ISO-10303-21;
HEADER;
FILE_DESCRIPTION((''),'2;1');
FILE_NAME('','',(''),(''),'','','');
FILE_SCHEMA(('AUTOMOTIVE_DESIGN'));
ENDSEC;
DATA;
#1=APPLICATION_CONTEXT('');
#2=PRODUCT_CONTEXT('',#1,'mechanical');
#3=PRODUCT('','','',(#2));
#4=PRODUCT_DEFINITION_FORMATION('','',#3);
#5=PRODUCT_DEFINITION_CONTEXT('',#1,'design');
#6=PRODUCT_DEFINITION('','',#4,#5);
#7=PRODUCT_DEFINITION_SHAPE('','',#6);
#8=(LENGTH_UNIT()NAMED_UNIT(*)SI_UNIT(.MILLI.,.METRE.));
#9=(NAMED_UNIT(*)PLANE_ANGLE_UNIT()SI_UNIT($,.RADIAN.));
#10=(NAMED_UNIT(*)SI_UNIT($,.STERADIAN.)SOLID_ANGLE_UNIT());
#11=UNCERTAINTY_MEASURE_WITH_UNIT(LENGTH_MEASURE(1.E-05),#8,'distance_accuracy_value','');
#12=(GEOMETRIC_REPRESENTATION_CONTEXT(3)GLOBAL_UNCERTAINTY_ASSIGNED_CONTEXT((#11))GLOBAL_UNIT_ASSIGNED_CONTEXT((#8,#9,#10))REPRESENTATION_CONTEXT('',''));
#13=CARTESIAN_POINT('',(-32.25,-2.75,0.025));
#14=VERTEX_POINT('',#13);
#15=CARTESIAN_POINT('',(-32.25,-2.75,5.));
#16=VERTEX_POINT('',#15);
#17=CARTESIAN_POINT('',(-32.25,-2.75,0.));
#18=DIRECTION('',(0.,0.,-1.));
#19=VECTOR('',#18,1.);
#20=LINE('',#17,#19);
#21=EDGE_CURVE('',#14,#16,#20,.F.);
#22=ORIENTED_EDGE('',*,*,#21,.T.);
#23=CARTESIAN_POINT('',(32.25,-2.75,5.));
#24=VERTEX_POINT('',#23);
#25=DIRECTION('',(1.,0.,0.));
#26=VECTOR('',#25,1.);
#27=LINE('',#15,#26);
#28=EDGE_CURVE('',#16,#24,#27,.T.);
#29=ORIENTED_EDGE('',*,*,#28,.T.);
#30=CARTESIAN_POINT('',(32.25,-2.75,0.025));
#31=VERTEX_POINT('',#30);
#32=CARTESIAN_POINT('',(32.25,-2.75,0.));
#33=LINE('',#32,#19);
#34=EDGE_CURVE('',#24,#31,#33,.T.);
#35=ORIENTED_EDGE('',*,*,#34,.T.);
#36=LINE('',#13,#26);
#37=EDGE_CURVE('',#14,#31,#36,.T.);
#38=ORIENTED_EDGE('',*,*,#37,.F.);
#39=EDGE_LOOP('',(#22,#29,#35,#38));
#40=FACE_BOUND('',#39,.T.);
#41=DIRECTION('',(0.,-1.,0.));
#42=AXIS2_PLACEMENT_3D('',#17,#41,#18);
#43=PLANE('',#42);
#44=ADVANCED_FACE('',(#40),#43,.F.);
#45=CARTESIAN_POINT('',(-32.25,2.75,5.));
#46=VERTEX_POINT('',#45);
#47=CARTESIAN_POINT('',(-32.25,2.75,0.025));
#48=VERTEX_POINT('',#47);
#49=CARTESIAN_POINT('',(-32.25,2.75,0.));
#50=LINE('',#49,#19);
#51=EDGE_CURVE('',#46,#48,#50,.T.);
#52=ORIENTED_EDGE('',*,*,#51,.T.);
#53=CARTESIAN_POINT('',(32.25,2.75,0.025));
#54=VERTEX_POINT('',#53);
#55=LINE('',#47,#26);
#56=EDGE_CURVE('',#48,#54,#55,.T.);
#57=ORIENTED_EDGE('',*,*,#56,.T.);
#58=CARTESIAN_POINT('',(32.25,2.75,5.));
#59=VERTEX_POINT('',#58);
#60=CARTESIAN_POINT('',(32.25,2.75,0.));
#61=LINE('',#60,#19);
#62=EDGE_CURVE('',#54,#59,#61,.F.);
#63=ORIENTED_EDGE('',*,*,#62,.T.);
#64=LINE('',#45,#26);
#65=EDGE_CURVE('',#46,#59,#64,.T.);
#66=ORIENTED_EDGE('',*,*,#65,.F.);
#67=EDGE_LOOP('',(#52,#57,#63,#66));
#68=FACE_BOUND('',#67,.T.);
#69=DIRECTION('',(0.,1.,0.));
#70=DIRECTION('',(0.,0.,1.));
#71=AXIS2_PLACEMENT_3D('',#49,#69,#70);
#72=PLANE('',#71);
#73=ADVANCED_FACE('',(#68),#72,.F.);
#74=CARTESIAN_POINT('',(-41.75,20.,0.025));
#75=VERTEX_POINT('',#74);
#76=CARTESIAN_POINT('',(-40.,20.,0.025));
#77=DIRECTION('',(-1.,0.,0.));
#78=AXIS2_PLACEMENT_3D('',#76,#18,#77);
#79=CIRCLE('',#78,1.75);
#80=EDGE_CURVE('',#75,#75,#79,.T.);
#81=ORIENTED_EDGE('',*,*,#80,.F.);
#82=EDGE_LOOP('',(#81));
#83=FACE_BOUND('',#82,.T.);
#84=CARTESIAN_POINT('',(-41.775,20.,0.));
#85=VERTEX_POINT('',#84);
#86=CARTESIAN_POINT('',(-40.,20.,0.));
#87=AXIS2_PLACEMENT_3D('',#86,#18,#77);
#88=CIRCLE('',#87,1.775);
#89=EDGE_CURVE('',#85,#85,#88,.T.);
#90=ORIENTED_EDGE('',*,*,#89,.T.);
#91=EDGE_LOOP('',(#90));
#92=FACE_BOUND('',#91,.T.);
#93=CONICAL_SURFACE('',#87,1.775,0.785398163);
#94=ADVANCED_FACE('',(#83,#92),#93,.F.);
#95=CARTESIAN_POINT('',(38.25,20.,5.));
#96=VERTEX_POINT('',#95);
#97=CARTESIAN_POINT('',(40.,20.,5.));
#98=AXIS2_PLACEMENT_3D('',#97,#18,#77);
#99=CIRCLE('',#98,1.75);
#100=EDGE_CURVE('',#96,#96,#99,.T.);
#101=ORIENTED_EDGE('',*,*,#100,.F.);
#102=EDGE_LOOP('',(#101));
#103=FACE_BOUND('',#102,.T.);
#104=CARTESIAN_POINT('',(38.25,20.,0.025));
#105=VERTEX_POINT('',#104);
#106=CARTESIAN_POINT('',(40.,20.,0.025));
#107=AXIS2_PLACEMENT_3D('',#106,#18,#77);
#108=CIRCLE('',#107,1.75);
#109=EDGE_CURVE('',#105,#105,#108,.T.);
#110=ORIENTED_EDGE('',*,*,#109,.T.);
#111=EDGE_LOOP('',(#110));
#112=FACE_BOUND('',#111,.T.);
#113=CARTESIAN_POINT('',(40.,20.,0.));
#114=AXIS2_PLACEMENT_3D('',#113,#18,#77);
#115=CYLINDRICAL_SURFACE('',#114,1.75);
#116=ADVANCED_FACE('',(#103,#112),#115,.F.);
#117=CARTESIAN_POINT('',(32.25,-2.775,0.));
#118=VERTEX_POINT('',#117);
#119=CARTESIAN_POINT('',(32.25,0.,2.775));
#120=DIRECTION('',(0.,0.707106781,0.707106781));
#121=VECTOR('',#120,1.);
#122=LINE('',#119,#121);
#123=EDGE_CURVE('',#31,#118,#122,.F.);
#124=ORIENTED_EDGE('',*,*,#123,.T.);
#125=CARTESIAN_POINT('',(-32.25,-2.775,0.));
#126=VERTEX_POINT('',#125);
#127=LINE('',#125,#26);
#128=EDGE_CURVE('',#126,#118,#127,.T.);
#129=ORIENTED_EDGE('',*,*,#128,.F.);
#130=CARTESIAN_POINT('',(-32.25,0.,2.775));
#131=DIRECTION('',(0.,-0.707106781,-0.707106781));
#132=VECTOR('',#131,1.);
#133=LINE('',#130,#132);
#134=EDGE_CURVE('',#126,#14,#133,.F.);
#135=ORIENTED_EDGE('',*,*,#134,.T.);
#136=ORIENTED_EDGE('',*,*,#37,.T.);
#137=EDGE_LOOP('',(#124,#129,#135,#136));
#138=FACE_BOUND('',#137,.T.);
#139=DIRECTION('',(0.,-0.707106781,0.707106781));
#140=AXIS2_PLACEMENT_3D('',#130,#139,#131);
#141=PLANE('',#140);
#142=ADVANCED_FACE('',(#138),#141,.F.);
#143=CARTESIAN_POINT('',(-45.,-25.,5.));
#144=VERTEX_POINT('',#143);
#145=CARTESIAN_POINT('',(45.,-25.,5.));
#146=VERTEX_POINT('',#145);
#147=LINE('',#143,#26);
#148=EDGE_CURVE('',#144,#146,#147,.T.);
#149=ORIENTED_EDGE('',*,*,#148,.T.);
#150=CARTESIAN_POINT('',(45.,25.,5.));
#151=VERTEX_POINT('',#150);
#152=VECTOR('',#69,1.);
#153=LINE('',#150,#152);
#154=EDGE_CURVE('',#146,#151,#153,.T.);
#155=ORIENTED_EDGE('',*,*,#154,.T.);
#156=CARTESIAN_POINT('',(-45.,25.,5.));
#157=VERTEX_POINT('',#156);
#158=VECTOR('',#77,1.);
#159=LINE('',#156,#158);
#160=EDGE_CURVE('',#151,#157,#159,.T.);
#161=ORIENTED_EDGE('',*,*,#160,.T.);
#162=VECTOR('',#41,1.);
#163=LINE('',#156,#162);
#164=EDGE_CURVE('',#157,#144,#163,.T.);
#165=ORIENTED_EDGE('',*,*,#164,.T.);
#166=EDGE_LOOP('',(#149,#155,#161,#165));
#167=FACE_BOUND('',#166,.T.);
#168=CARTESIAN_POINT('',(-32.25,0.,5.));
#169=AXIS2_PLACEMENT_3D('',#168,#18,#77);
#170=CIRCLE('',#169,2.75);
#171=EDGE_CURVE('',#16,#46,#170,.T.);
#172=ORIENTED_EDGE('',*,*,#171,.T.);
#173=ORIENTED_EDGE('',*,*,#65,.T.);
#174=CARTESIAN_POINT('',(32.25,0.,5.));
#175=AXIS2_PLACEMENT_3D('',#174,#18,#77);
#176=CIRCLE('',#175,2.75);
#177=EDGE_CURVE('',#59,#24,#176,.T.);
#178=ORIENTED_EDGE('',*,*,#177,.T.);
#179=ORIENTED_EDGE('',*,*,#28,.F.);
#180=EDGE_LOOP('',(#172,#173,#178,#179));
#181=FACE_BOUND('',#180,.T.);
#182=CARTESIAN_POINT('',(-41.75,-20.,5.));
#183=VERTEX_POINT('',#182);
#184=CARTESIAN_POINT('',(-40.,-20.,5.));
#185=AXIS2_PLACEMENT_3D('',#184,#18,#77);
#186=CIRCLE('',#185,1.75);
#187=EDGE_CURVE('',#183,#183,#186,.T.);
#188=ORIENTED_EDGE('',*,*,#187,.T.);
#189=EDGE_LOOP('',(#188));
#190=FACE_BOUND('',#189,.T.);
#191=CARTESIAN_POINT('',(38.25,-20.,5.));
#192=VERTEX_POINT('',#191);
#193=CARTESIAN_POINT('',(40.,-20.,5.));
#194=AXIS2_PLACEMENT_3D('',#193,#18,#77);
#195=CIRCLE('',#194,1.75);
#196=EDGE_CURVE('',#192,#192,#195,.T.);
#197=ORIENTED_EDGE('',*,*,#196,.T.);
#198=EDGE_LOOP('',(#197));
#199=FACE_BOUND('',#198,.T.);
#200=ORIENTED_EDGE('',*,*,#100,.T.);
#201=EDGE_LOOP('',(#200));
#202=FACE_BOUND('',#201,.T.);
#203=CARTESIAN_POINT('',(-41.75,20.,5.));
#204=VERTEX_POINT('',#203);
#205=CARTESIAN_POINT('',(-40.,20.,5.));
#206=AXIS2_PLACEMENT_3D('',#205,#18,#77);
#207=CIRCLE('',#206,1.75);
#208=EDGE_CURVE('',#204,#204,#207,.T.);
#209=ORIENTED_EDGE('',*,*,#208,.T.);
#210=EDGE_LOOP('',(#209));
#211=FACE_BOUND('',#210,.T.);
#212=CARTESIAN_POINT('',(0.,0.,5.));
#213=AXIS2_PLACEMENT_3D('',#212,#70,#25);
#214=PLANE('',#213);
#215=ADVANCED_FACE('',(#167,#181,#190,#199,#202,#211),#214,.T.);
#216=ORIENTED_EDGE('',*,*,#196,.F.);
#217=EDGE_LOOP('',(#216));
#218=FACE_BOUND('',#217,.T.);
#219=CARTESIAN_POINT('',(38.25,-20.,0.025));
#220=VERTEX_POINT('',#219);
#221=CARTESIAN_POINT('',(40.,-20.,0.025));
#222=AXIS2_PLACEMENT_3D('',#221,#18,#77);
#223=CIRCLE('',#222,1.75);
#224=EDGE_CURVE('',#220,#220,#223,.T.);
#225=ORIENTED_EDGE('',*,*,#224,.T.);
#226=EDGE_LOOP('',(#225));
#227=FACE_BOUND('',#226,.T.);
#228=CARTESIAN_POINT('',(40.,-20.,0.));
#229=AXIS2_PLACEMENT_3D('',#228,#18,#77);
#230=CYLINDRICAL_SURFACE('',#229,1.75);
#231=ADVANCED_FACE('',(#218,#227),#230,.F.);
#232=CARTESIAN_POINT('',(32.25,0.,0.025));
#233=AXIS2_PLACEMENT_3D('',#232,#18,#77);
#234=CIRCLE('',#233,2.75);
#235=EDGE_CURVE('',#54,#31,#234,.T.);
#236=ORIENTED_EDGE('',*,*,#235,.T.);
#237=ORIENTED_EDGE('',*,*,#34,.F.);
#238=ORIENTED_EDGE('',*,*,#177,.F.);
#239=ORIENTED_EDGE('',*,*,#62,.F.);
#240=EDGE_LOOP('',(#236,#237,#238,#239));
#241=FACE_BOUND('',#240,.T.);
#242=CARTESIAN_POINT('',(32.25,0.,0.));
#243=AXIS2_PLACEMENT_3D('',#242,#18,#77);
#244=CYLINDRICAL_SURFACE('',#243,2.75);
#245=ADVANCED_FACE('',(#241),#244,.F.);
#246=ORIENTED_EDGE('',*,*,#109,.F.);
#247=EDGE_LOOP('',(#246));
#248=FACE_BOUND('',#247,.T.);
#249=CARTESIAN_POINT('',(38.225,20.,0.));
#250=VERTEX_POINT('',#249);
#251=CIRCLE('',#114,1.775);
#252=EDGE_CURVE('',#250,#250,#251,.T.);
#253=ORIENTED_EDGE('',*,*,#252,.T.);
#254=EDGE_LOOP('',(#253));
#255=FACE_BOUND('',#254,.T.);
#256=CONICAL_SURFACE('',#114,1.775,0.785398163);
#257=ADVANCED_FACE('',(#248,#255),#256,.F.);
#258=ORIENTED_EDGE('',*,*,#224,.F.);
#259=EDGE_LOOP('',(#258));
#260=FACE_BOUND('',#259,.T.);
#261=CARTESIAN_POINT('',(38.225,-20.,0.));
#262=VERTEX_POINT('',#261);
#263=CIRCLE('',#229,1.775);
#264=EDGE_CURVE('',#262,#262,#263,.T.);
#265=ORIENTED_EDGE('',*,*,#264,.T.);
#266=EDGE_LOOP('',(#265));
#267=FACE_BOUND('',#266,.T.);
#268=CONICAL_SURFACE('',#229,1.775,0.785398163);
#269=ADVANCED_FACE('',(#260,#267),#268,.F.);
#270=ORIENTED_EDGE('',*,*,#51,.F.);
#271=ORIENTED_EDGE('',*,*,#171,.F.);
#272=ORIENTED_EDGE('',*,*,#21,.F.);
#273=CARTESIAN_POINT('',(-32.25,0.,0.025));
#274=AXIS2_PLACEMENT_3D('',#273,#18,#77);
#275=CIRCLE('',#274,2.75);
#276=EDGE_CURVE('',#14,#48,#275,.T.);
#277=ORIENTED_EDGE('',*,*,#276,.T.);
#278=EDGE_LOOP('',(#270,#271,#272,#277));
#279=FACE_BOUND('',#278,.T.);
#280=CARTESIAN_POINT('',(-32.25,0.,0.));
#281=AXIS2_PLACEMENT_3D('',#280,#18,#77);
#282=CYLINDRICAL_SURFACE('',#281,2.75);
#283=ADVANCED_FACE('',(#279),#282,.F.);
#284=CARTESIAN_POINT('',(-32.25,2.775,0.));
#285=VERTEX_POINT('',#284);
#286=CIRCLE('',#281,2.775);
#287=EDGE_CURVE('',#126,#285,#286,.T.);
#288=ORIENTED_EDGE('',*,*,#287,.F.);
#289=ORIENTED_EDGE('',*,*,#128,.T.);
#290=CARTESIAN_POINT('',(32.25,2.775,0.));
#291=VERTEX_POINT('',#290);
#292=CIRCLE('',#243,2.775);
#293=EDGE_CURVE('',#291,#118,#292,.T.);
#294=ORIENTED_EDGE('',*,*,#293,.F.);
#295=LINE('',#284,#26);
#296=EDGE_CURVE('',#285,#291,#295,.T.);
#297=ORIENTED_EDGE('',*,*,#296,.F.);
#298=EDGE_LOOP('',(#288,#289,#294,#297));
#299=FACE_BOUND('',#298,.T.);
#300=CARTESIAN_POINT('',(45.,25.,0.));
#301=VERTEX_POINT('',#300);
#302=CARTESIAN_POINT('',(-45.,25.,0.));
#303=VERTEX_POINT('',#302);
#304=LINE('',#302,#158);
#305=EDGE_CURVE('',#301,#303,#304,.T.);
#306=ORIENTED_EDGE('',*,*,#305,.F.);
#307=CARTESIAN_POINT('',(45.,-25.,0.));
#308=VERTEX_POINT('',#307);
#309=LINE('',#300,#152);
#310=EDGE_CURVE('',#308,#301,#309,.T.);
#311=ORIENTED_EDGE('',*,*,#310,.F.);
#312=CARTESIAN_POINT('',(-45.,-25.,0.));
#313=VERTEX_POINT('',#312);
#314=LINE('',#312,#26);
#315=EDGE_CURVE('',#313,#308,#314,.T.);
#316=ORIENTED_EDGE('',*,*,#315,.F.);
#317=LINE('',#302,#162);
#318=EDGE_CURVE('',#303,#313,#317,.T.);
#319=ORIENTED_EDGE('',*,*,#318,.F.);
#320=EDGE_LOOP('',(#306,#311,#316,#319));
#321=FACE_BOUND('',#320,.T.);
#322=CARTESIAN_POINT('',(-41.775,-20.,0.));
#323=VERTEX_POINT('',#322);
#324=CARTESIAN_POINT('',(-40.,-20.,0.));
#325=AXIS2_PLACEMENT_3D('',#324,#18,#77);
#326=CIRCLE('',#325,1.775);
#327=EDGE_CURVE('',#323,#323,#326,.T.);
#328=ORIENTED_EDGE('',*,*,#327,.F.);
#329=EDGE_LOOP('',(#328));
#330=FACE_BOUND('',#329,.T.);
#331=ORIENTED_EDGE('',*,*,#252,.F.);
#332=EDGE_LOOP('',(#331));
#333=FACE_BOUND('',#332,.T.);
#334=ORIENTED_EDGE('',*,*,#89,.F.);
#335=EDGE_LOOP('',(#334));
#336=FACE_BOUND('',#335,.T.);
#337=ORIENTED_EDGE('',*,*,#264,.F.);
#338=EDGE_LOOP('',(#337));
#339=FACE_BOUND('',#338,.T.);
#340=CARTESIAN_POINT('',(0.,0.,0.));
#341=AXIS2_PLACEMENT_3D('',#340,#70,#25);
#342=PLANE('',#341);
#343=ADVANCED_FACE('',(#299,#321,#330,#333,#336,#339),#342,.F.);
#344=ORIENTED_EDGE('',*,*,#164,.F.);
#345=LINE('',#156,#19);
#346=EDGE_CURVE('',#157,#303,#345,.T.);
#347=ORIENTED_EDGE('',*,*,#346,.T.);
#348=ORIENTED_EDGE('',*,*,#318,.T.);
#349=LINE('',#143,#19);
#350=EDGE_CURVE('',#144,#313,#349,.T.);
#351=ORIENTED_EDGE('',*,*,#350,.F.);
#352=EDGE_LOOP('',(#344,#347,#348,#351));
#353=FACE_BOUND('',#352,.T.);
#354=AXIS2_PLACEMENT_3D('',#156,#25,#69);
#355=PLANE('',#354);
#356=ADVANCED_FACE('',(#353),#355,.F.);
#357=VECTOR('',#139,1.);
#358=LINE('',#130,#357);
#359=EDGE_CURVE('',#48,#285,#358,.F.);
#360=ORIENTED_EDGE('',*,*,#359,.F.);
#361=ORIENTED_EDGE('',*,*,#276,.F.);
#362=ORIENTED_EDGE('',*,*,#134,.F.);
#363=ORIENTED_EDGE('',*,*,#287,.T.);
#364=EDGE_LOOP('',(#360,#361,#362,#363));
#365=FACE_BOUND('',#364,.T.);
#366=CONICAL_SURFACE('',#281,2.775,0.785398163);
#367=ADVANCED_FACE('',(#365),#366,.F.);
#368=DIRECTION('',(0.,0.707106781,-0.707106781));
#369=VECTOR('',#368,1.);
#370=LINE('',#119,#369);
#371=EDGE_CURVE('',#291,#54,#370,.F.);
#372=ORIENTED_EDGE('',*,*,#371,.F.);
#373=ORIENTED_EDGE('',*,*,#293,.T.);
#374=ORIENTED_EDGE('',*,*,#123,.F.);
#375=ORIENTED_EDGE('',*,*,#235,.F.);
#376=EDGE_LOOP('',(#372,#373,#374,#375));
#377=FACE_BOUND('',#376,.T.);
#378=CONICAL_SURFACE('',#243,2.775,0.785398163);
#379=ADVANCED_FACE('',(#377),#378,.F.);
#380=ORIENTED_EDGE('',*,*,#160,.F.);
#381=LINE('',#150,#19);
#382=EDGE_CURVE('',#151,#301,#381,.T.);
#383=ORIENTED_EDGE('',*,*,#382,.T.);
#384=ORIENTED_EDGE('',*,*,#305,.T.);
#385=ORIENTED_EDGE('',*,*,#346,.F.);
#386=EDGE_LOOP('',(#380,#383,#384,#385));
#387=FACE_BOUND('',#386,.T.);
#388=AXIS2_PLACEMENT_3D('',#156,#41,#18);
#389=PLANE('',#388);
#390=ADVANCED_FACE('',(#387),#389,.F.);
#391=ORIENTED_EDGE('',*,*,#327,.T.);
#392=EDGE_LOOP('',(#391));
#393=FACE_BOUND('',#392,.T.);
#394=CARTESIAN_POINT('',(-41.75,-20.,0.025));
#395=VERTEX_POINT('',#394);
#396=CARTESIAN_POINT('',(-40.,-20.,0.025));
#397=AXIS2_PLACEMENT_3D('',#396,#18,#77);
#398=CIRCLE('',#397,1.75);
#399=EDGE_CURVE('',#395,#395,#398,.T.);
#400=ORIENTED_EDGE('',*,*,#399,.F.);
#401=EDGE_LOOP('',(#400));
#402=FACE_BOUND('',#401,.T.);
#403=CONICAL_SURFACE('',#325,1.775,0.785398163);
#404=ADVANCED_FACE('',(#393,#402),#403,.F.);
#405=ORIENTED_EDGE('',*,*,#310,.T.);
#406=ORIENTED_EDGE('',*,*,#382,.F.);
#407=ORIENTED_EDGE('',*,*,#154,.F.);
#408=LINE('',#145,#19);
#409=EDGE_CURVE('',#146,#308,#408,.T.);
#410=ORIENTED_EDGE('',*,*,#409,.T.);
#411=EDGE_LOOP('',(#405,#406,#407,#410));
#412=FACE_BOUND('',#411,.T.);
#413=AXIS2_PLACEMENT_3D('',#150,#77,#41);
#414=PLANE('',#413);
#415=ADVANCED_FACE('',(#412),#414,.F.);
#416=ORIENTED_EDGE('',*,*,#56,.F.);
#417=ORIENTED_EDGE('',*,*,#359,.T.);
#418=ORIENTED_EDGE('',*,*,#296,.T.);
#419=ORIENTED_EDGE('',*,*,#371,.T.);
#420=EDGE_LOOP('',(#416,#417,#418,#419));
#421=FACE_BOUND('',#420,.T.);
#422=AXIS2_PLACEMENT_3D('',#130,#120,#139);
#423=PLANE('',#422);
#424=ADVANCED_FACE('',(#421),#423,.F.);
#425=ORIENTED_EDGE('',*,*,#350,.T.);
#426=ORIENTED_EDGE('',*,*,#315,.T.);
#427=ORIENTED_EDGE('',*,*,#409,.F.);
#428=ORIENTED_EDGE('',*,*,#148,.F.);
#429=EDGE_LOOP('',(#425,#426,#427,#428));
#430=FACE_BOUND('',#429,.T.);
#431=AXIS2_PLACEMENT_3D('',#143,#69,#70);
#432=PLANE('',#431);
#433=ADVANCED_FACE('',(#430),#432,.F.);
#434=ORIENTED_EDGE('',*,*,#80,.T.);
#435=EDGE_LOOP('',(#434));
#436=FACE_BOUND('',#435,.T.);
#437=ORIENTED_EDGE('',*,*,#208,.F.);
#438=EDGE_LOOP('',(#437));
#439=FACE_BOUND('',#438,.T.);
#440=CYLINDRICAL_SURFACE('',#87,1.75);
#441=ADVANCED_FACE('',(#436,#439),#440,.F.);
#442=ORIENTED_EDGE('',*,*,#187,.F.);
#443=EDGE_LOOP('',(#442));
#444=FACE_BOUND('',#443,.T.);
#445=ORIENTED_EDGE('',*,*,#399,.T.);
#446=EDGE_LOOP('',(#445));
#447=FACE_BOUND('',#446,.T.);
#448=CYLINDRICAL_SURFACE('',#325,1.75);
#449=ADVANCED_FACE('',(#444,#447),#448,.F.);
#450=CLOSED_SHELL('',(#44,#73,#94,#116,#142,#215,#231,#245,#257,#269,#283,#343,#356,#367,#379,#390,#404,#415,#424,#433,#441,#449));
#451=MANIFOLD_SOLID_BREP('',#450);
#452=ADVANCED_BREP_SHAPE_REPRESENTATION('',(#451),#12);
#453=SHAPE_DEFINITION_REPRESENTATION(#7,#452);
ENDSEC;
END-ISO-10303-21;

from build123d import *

# Parameters (mm, degrees)
SKETCH1_W                            = 90
SKETCH1_H                            = 50
BOSS_EXTRUDE1_DEPTH                  = 5
F_5_5_5_5_DIAMETER_SLOT1_DEPTH       = 5
F_3_5_3_5_DIAMETER_HOLE1_D           = 3.5
F_3_5_3_5_DIAMETER_HOLE1_CSINK_D     = 3.55
F_3_5_3_5_DIAMETER_HOLE1_CSINK_ANGLE = 90


with BuildPart() as part:
    # Sketch1 → Boss-Extrude1 (new body)
    with BuildSketch(Plane.XY):
        Rectangle(SKETCH1_W, SKETCH1_H)
    extrude(amount=BOSS_EXTRUDE1_DEPTH)

    # Ø5.5 (5.5) Diameter Slot1: read off the stored shape, not the designer's step
    # Ø5.5 (5.5) Diameter Slot1 outline → Ø5.5 (5.5) Diameter Slot1 (cut)
    with BuildSketch(Plane.XY):
        with BuildLine():
            ThreePointArc((32.25, -2.75), (35, 0), (32.25, 2.75))
            Line((32.25, 2.75), (-32.25, 2.75))
            ThreePointArc((-32.25, 2.75), (-35, 0), (-32.25, -2.75))
            Line((-32.25, -2.75), (32.25, -2.75))
        make_face()
    extrude(amount=F_5_5_5_5_DIAMETER_SLOT1_DEPTH, mode=Mode.SUBTRACT)

    # 5.5 _5.5_ Diameter Slot1 2: loft between two sections, ruled curve by curve
    f_5_5_5_5_diameter_slot1_2_from = [
        Edge.make_three_point_arc((32.25, 2.75, 0.025), (34.194543648, 1.944543648, 0.025), (35, 0, 0.025)),
        Edge.make_three_point_arc((35, 0, 0.025), (34.194543648, -1.944543648, 0.025), (32.25, -2.75, 0.025)),
        Edge.make_three_point_arc((-32.25, -2.75, 0.025), (-34.194543648, -1.944543648, 0.025), (-35, 0, 0.025)),
        Edge.make_three_point_arc((-35, 0, 0.025), (-34.194543648, 1.944543648, 0.025), (-32.25, 2.75, 0.025)),
        Edge.make_line((32.25, -2.75, 0.025), (-32.25, -2.75, 0.025)),
        Edge.make_line((32.25, 2.75, 0.025), (-32.25, 2.75, 0.025)),
    ]
    f_5_5_5_5_diameter_slot1_2_to = [
        Edge.make_three_point_arc((32.25, 2.775, 0), (34.212221318, 1.962221318, 0), (35.025, 0, 0)),
        Edge.make_three_point_arc((35.025, 0, 0), (34.212221318, -1.962221318, 0), (32.25, -2.775, 0)),
        Edge.make_three_point_arc((-32.25, -2.775, 0), (-34.212221318, -1.962221318, 0), (-35.025, 0, 0)),
        Edge.make_three_point_arc((-35.025, 0, 0), (-34.212221318, 1.962221318, 0), (-32.25, 2.775, 0)),
        Edge.make_line((32.25, -2.775, 0), (-32.25, -2.775, 0)),
        Edge.make_line((32.25, 2.775, 0), (-32.25, 2.775, 0)),
    ]
    f_5_5_5_5_diameter_slot1_2 = Solid(Shell([*[Face.make_surface_from_curves(f_5_5_5_5_diameter_slot1_2_from[k], f_5_5_5_5_diameter_slot1_2_to[k]) for k in range(6)], Face(Wire(f_5_5_5_5_diameter_slot1_2_from)), Face(Wire(f_5_5_5_5_diameter_slot1_2_to))]))
    add(f_5_5_5_5_diameter_slot1_2, mode=Mode.SUBTRACT)

    # Ø3.5 (3.5) Diameter Hole1 (through all)
    with Locations(Plane(origin=(0, 0, 0), x_dir=(-1, 0, 0), z_dir=(0, 0, -1))):
        with Locations((-40, 20), (40, 20), (40, -20), (-40, -20)):
            CounterSinkHole(F_3_5_3_5_DIAMETER_HOLE1_D / 2, F_3_5_3_5_DIAMETER_HOLE1_CSINK_D / 2, counter_sink_angle=F_3_5_3_5_DIAMETER_HOLE1_CSINK_ANGLE)


solid = part.part
